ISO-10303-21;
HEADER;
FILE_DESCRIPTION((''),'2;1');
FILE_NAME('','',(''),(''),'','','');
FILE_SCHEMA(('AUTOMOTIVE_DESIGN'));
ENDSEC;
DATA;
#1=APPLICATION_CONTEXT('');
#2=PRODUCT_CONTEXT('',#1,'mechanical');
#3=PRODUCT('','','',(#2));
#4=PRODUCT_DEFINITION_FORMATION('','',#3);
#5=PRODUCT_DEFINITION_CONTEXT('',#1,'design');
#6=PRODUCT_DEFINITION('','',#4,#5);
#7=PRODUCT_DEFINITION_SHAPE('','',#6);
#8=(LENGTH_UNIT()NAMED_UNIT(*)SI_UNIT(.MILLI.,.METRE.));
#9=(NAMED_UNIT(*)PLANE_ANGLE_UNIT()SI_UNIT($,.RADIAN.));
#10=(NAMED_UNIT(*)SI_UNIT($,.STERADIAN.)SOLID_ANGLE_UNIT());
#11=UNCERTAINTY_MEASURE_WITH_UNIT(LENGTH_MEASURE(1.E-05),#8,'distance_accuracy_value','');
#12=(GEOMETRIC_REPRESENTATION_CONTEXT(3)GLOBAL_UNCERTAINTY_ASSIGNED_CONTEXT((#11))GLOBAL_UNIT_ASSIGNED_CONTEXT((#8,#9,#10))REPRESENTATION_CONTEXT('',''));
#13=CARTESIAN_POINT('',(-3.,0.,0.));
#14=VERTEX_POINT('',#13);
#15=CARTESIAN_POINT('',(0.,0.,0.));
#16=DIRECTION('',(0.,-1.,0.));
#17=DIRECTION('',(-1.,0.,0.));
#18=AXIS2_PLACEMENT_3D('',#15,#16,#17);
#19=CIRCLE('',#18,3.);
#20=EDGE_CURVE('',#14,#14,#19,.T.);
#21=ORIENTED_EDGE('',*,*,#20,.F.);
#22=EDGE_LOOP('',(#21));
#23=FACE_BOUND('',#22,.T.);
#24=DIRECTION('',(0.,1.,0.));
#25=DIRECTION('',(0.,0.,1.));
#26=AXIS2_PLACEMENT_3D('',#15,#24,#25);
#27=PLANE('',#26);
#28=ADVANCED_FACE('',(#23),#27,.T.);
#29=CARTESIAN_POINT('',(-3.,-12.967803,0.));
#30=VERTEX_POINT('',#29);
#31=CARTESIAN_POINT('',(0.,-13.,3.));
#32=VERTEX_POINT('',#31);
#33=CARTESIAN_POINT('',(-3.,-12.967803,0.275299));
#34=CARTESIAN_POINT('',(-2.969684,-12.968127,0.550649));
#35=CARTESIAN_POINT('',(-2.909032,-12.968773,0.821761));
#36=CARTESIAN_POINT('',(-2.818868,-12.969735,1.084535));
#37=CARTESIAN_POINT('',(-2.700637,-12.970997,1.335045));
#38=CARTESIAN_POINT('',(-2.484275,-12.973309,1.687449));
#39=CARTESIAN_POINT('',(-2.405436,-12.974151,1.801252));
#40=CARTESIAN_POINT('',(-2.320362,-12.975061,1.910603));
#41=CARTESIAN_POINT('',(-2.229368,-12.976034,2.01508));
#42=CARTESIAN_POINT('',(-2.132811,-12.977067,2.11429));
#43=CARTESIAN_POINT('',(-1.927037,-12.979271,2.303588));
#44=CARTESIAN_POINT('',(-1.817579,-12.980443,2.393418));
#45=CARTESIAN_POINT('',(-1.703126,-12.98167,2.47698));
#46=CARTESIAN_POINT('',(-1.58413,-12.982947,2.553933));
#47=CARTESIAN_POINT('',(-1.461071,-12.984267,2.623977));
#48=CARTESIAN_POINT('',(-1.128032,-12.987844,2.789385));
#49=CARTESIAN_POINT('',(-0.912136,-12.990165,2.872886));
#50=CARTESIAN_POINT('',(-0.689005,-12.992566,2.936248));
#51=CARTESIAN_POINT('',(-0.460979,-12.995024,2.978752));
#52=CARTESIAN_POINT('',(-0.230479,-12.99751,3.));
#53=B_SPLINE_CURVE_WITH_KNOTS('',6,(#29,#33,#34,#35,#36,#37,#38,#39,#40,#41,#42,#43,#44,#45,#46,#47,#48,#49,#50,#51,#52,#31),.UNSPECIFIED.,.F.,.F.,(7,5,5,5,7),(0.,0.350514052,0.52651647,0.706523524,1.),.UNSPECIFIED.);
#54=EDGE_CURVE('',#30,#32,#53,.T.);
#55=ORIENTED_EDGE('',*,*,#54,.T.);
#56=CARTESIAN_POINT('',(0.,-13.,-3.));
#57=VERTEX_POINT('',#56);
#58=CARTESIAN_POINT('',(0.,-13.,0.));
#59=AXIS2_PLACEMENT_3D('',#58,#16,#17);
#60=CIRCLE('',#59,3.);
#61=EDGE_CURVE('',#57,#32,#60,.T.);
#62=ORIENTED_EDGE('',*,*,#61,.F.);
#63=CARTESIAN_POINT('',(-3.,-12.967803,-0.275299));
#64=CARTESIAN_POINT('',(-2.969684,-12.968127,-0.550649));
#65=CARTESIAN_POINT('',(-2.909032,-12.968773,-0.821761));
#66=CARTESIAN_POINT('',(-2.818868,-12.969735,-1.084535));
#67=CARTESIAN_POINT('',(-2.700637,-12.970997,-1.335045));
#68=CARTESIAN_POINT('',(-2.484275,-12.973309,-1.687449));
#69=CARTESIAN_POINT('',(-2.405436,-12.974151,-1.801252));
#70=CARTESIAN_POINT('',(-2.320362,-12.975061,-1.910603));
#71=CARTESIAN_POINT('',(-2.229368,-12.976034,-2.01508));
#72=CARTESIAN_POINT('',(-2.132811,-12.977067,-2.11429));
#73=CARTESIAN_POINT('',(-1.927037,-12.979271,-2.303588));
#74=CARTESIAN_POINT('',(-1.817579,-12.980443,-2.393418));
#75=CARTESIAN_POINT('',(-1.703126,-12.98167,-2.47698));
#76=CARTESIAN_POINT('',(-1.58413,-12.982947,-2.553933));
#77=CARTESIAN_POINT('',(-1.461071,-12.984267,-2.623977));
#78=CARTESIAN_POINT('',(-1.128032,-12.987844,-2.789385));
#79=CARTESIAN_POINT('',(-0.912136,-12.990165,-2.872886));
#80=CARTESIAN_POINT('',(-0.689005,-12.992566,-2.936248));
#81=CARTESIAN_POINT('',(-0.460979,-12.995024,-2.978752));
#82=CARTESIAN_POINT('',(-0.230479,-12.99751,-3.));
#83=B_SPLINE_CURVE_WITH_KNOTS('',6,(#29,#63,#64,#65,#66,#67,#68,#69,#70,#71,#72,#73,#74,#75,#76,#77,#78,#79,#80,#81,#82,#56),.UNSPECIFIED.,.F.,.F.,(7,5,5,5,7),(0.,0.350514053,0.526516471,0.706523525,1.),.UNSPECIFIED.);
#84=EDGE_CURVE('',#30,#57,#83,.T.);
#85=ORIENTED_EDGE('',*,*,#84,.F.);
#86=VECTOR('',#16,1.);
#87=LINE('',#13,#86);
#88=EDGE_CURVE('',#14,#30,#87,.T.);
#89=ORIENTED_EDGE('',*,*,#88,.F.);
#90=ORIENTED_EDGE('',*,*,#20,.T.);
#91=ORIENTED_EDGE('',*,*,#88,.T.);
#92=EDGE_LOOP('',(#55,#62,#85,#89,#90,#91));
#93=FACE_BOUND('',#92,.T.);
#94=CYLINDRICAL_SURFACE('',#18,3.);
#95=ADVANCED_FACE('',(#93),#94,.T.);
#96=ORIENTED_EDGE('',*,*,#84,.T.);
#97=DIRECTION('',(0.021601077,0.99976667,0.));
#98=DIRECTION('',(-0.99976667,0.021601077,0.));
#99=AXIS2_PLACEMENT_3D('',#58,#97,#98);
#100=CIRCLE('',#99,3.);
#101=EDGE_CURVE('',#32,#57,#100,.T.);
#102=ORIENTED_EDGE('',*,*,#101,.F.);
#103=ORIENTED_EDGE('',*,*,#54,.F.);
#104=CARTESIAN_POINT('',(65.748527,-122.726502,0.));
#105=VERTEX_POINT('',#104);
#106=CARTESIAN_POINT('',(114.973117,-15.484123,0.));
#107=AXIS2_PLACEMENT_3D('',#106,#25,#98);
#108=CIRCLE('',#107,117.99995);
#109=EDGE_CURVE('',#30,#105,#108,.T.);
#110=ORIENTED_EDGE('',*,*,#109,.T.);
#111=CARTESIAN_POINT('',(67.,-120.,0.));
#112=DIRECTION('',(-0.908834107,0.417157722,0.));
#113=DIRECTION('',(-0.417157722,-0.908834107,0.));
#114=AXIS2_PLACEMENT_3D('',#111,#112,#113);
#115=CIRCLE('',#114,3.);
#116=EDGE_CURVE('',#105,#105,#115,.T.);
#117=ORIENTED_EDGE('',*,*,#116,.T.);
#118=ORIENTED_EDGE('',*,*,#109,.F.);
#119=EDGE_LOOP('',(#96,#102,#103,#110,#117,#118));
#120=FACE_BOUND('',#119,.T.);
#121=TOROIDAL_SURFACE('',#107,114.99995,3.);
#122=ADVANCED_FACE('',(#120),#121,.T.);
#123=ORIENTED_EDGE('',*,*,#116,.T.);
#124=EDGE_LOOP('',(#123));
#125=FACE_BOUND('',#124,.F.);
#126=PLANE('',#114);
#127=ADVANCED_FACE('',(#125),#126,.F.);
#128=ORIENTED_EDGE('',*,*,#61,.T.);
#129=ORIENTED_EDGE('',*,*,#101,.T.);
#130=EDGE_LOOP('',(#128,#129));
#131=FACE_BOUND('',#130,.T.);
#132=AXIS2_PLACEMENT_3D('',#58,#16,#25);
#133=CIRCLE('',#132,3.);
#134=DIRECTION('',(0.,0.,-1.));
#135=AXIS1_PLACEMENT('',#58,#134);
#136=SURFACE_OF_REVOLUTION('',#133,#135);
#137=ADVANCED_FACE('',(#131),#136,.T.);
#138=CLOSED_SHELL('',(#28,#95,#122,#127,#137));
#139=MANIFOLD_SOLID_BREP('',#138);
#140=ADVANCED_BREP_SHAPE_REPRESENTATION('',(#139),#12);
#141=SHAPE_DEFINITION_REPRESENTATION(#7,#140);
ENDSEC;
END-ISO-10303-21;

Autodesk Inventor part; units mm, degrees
ref_plane "YZ Plane" through (0, 0, 0) normal (1, 0, 0) x (0, 1, 0)
ref_plane "XZ Plane" through (0, 0, 0) normal (0, 1, 0) x (-1, 0, 0)
ref_plane "XY Plane" through (0, 0, 0) normal (0, 0, 1) x (1, 0, 0)
sketch "Skizze2" plane through (0, 0, 0) normal (0, 1, 0) x (-1, 0, 0)
  circle A0 centre (0, 0) radius 3
  dimension "d1" = 6
sketch "Skizze3" plane through (0, 0, 0) normal (0, 0, 1) x (1, 0, 0)
  arc A0 (0, -13) -> (67, -120) centre (114.9732, -15.4841) ccw
  line L0 (0, 0) -> (0, -13)
  dimension "d2" = 115
  dimension "d3" = 120
  dimension "d4" = 67
  dimension "d8" = 13
sweep "Sweeping1" add profiles "Skizze2" path "Skizze3"
thread "Gewinde1"
sketch3d "3D-Skizze2"
properties part number "stand" material "Acetalharz, Schwarz"
